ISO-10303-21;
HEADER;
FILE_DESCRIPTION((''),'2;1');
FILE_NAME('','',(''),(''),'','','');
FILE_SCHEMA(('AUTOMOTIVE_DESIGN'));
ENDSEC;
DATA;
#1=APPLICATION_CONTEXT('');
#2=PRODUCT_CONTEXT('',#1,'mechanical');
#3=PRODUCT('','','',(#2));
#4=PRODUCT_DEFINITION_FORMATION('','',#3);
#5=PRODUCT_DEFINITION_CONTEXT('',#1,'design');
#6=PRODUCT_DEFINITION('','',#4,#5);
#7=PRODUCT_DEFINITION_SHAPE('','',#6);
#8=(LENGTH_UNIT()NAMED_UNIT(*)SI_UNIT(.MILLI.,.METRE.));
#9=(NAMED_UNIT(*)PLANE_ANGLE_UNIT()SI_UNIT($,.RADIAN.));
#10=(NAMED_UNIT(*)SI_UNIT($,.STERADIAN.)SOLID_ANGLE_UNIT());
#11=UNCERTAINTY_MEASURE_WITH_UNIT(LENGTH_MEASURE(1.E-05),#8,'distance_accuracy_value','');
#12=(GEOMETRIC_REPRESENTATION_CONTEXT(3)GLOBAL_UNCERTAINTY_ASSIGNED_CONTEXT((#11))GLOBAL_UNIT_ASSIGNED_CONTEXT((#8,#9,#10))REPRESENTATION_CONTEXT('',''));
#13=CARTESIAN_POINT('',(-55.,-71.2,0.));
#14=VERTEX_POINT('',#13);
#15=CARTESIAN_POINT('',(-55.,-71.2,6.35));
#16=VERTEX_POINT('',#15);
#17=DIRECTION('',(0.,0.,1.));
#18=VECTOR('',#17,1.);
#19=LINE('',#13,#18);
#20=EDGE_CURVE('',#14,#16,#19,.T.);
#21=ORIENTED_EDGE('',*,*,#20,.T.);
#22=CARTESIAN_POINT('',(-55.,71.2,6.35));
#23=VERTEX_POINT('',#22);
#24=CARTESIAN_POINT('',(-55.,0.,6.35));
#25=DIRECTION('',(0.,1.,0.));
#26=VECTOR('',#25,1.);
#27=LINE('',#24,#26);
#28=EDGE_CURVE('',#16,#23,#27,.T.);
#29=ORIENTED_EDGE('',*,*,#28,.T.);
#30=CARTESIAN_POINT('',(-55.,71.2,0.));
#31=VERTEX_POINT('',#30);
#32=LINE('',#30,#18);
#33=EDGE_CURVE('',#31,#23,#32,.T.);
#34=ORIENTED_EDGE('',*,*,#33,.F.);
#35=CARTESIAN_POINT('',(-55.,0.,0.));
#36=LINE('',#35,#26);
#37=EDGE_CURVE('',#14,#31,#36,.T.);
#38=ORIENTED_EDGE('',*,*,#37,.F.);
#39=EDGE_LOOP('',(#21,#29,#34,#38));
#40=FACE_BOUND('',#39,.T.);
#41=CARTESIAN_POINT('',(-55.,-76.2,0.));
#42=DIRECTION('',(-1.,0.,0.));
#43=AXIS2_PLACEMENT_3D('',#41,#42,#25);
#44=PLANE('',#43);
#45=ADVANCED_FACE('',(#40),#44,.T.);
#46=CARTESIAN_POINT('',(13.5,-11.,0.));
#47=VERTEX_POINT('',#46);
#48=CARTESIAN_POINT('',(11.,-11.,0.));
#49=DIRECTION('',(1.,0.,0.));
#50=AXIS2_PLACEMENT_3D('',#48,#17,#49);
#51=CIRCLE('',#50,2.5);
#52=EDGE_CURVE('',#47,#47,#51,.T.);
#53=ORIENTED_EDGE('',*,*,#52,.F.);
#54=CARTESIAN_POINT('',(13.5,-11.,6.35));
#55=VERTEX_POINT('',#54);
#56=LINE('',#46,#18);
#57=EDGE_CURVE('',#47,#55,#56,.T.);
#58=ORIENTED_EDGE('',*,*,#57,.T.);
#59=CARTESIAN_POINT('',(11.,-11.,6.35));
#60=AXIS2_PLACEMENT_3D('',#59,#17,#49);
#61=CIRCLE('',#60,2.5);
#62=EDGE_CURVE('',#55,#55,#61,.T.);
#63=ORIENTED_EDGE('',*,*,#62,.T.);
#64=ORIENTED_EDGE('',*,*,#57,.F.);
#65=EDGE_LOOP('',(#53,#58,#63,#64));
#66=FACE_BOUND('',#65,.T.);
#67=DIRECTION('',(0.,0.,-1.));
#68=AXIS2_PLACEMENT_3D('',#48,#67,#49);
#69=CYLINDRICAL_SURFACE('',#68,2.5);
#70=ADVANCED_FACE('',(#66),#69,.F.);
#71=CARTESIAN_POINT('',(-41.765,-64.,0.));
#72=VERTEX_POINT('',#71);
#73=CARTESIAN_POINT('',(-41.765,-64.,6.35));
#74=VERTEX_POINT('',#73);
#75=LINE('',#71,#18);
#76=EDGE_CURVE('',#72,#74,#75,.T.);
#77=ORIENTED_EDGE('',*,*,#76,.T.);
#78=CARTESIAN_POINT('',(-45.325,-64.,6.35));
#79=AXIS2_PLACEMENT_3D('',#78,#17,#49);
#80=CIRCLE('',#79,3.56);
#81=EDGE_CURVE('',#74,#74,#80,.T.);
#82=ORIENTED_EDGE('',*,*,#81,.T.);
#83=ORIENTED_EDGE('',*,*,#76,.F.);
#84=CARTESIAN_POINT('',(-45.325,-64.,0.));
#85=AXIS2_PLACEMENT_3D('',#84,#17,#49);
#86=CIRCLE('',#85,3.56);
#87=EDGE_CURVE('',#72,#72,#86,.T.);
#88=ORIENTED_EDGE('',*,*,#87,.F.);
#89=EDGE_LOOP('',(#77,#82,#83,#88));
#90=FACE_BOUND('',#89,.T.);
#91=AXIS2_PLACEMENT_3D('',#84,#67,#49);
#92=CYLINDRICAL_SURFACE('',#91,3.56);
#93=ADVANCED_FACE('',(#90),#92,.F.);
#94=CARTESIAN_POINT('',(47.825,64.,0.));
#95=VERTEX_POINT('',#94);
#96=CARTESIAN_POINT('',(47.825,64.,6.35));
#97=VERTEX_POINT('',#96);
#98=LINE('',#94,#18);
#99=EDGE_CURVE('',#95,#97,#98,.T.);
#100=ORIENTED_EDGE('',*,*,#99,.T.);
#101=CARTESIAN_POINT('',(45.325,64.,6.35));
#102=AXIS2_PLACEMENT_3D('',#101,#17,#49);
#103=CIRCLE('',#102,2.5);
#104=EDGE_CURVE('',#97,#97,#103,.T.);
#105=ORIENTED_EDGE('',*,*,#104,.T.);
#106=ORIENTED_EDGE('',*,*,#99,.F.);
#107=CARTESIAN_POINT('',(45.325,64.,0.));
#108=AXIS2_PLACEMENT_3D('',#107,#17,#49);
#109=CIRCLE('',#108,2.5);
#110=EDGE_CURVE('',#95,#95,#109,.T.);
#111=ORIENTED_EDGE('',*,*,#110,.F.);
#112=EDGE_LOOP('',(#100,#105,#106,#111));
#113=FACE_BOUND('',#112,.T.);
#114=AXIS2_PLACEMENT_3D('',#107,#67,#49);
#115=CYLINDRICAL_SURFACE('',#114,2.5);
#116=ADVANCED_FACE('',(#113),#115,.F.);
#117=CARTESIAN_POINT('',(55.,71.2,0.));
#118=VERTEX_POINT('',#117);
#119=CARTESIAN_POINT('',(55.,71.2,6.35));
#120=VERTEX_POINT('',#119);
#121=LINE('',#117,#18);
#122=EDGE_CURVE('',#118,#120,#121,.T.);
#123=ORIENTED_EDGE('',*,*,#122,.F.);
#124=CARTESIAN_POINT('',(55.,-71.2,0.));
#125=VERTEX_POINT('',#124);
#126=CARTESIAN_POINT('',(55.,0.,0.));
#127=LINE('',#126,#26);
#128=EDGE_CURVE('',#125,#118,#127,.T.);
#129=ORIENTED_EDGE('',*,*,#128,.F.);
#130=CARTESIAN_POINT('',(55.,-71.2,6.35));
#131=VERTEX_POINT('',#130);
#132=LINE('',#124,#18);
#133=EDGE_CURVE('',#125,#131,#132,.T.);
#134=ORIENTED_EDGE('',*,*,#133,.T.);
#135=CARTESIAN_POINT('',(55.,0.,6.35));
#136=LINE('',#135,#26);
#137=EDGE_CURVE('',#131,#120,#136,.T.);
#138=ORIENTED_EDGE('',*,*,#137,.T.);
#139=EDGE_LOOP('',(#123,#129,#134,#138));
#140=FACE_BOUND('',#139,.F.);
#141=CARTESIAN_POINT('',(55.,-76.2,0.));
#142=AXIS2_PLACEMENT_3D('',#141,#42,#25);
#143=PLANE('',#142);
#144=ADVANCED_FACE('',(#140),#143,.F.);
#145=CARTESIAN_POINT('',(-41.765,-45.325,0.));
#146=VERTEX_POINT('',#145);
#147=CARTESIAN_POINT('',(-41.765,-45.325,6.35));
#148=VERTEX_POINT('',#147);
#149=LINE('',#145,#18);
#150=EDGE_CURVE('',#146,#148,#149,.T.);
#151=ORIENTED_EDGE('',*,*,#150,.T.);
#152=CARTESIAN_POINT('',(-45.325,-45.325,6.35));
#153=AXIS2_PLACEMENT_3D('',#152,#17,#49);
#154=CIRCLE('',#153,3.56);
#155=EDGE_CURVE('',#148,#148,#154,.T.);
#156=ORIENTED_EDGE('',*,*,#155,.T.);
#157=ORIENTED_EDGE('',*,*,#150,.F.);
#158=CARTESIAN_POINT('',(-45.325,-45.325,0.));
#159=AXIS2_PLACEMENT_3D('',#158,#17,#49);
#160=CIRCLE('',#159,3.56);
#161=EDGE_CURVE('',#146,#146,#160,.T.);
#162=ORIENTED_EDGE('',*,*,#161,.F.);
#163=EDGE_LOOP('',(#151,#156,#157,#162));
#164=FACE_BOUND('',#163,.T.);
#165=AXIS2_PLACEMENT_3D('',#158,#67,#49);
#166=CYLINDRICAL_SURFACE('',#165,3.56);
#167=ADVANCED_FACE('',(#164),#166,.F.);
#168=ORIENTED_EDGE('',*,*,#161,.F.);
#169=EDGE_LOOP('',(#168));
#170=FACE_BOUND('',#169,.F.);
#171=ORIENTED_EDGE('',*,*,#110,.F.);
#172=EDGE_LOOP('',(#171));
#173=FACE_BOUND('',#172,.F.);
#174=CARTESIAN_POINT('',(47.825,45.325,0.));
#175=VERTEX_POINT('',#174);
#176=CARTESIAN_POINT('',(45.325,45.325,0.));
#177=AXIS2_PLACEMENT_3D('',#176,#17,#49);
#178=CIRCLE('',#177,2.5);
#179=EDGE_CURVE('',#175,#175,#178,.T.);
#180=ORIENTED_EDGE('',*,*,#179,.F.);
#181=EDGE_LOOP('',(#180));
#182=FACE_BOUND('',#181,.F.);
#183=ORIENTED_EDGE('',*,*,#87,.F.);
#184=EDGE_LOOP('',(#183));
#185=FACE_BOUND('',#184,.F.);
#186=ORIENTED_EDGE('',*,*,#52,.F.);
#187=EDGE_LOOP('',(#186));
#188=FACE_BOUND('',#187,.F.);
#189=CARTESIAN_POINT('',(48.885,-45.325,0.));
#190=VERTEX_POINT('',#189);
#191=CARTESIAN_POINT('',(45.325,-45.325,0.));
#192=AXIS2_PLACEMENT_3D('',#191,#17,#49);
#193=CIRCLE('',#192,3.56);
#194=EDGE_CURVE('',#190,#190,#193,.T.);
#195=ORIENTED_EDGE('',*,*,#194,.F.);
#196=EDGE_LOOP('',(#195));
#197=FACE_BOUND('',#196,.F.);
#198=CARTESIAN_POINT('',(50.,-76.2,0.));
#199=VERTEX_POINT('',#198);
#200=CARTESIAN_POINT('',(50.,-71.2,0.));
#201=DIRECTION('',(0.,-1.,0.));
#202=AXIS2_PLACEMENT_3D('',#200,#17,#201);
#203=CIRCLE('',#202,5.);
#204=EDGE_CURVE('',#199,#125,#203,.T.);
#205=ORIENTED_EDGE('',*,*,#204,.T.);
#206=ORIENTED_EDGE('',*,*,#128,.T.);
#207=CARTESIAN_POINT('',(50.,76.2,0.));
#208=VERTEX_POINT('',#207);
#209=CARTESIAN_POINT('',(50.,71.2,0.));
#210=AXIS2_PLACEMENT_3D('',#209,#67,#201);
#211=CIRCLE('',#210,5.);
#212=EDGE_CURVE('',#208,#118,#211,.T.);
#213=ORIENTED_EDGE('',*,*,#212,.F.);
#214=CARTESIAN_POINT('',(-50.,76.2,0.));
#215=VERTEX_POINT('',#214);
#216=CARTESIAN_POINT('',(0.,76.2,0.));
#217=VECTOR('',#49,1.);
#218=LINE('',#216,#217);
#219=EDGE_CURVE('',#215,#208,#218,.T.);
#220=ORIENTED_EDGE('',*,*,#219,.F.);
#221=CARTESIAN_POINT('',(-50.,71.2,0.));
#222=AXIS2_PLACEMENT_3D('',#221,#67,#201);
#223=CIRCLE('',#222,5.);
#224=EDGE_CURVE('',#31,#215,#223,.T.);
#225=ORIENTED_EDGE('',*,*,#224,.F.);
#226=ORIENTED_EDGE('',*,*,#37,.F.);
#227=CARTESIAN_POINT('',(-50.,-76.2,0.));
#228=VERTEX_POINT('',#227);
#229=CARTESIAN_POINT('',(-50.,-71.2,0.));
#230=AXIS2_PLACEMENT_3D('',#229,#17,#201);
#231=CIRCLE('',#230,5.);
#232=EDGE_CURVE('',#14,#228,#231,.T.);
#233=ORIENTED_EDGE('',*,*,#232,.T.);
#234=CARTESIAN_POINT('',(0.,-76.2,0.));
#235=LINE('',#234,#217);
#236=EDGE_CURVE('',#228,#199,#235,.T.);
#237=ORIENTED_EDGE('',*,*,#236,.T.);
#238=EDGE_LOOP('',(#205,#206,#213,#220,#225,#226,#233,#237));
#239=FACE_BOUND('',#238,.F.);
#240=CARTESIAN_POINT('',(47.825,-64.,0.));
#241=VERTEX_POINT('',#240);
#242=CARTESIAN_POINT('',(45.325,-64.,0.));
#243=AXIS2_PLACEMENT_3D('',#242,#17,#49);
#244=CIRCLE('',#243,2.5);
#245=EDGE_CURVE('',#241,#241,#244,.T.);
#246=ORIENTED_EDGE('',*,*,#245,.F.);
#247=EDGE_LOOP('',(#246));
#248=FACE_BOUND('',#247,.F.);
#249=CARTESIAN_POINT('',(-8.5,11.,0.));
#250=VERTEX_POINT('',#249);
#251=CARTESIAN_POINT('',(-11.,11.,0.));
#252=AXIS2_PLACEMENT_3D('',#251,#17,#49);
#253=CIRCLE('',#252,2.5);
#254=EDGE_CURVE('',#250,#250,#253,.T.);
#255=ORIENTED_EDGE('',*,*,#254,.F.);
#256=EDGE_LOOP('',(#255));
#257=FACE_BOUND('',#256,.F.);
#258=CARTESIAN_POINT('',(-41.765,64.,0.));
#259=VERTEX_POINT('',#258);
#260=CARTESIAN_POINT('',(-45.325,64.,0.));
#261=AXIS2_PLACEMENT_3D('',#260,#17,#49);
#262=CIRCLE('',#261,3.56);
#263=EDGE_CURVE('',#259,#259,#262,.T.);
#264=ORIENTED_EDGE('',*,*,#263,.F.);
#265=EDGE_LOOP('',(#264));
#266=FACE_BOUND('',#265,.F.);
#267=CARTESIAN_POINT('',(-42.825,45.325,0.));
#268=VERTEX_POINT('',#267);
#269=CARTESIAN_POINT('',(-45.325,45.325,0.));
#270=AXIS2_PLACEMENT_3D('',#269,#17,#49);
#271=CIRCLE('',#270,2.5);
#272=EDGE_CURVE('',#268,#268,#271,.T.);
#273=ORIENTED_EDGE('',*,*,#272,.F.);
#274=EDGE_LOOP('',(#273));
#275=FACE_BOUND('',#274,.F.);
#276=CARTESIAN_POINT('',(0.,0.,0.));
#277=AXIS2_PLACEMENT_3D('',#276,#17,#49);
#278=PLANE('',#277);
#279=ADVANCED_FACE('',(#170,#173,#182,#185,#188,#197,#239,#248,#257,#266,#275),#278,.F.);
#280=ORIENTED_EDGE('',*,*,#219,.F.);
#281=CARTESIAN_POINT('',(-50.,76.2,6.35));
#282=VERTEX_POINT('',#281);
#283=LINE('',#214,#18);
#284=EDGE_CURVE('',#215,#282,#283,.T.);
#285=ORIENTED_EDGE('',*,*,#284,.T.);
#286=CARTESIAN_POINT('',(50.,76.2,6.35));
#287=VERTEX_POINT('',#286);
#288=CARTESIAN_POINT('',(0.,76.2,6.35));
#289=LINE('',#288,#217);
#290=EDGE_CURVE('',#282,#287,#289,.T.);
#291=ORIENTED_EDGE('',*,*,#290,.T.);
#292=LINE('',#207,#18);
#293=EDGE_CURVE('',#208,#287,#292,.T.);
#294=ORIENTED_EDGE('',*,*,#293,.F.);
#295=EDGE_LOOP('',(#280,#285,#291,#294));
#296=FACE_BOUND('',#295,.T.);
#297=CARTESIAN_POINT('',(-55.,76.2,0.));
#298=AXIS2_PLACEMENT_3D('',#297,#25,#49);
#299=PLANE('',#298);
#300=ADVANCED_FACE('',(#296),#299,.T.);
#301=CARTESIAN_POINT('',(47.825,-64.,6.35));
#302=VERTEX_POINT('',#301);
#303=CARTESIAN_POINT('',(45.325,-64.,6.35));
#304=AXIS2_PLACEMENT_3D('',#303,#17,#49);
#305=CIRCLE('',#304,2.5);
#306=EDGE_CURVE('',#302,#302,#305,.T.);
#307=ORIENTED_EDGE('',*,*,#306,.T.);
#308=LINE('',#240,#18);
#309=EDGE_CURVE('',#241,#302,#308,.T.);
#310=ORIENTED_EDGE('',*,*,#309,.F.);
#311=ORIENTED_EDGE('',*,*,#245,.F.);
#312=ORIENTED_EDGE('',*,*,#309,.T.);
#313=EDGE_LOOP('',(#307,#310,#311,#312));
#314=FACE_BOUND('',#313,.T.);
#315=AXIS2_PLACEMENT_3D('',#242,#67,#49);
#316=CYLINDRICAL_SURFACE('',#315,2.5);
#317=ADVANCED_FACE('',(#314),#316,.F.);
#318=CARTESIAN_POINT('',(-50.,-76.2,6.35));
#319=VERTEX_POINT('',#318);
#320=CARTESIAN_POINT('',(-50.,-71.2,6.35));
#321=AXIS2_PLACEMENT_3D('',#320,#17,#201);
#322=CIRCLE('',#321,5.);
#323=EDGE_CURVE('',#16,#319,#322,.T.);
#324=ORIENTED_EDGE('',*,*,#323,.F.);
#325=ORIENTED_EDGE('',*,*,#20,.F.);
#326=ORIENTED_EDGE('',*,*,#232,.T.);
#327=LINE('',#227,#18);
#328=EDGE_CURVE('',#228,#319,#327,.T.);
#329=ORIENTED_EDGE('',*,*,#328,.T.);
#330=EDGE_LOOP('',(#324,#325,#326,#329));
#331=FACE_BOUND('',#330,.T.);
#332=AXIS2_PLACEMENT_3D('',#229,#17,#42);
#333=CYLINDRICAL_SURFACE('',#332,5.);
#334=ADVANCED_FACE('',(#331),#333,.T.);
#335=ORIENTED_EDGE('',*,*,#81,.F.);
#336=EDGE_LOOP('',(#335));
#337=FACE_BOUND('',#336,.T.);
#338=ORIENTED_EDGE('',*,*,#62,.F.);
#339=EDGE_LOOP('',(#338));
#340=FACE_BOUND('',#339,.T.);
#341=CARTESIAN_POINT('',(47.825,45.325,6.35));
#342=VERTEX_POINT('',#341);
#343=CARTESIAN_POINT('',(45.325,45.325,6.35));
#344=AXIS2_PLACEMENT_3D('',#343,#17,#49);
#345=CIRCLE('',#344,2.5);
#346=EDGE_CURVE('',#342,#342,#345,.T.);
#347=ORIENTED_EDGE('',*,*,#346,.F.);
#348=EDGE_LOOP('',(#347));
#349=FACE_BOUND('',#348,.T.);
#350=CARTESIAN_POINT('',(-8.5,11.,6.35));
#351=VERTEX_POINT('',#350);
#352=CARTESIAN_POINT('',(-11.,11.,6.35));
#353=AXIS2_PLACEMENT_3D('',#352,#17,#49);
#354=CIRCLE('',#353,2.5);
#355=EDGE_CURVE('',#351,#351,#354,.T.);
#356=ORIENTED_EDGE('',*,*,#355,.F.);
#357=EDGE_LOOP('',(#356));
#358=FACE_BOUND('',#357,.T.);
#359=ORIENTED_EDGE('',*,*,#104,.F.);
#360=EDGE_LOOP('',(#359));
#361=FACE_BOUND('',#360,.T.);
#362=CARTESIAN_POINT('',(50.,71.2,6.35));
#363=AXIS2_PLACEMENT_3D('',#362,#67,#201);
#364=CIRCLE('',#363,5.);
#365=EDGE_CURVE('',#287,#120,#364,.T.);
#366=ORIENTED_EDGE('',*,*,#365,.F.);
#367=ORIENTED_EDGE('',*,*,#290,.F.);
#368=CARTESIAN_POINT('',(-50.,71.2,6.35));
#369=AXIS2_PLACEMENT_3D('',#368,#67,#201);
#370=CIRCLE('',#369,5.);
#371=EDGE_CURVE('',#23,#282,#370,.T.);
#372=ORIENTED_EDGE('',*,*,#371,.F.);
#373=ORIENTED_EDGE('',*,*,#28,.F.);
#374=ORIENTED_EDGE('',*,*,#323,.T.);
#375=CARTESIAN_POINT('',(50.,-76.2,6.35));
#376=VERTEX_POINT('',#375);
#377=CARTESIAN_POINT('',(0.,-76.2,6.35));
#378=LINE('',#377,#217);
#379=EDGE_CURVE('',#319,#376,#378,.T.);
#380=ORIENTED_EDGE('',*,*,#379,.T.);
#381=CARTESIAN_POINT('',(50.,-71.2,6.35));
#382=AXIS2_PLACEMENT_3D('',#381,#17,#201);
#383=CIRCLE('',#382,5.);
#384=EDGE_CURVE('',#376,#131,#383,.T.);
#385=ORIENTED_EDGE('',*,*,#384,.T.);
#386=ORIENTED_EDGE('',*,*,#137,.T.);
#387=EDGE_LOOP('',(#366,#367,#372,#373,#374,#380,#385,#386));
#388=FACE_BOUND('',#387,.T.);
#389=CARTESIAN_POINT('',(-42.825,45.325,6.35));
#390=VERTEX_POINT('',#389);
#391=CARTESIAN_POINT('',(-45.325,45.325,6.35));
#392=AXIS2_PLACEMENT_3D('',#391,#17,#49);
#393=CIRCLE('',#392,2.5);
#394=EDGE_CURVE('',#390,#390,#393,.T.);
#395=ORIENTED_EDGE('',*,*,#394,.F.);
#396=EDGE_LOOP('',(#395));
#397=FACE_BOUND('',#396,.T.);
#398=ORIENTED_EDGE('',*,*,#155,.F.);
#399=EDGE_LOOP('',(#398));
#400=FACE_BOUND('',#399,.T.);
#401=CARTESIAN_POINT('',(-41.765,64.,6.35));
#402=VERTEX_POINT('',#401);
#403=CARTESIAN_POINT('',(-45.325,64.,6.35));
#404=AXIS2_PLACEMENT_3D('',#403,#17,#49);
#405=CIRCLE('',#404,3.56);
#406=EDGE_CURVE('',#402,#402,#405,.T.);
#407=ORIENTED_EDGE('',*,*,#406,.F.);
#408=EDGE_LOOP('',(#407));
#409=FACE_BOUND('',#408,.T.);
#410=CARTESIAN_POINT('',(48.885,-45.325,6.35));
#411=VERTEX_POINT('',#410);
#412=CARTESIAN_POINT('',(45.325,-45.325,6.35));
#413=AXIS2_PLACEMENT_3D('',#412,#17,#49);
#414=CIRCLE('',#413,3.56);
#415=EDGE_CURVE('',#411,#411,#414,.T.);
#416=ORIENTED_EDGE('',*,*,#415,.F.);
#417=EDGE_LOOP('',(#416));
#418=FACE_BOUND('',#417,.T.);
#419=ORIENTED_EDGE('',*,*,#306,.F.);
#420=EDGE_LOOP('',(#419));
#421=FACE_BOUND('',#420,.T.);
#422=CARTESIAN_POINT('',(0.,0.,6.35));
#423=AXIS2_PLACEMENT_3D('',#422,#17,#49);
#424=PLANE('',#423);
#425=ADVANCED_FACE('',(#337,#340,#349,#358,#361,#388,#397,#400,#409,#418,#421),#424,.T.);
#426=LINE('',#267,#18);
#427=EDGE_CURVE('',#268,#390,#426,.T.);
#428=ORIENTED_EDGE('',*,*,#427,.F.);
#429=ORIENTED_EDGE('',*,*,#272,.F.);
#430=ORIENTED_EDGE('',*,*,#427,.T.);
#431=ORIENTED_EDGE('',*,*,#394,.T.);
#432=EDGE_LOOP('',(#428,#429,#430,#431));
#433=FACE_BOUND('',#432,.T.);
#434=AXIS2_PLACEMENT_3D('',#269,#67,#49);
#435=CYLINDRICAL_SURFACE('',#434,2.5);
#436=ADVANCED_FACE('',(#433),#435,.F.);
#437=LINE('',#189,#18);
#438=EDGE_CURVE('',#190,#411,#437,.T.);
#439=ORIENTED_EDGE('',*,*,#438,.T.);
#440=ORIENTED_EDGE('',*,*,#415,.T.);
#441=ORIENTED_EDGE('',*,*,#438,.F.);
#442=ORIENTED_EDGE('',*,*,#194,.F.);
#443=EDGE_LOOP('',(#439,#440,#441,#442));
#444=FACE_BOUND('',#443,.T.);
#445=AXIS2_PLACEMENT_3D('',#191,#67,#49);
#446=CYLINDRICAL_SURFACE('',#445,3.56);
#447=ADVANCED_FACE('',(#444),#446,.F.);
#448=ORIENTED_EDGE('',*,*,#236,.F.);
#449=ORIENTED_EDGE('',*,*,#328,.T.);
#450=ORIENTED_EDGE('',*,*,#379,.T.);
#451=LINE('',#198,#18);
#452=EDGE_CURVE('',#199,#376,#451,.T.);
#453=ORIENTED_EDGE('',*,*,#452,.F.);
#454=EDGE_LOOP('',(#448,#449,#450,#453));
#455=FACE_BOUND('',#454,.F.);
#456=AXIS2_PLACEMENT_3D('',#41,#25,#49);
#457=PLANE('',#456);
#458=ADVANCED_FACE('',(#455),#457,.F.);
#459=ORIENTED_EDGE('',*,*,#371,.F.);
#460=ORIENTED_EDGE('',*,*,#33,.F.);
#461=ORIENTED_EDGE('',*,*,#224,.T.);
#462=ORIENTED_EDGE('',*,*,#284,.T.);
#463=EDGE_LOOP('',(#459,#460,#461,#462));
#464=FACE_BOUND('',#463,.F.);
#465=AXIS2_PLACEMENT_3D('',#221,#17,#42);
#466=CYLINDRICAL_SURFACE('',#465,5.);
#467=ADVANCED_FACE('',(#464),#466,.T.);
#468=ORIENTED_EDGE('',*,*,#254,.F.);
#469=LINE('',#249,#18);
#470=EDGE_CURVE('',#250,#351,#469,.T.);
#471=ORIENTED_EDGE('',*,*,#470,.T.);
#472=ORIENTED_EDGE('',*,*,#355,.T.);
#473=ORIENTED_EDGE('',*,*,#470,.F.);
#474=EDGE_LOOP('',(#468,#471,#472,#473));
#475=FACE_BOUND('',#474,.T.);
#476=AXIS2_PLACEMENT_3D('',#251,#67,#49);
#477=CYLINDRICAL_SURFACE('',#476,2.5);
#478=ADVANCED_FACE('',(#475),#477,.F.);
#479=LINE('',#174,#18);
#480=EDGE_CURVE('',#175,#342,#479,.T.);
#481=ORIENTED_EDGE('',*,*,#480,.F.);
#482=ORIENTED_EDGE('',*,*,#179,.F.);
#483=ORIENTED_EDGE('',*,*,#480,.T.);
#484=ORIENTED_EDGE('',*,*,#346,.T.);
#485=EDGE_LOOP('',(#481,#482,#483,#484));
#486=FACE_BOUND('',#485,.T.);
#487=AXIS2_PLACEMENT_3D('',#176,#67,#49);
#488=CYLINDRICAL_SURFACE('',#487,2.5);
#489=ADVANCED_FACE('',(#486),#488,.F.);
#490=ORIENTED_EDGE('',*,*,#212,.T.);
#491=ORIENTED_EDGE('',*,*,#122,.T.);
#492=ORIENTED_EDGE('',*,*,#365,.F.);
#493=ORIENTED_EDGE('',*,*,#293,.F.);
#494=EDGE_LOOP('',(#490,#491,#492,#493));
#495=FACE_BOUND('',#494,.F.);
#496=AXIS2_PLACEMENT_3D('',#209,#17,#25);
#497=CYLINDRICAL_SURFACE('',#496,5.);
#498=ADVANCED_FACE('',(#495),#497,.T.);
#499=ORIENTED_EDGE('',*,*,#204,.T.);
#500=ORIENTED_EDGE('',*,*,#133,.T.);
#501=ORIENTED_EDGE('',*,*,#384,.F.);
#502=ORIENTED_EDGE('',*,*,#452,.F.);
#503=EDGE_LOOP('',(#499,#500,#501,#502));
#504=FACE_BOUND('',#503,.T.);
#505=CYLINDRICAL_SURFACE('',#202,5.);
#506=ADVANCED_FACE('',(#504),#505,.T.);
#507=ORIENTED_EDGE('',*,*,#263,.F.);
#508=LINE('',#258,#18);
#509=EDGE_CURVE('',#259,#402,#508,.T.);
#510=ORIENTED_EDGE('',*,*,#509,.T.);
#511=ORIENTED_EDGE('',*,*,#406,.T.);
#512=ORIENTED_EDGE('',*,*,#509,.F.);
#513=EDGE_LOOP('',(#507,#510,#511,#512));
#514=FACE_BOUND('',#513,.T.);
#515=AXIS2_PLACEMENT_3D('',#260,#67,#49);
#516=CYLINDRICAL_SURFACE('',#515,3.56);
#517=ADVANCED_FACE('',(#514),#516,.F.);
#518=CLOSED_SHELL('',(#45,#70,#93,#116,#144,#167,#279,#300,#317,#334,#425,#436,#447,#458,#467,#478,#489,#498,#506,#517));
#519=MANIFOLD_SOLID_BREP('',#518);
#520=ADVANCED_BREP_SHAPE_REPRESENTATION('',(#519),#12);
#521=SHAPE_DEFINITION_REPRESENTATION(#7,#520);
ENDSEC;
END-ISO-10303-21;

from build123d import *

# Parameters (mm, degrees)
F0_W     = 110
F0_H     = 152.4
F0_R     = 3.56
F0_R_2   = 2.5
F1_DEPTH = 6.35
F2_R     = 5


# Not quite as in the source:
# - a length typed as a fraction of an inch, garbled in the dataset ("3 / 203.2 mm" for 3/8 in), is restored


with BuildPart() as f1:
    # F0 (on Top) → F1 (new body)
    with BuildSketch(Plane.XY):
        Rectangle(F0_W, F0_H)
        with Locations((-45.325, -64)):
            Circle(F0_R, mode=Mode.SUBTRACT)
        with Locations((-45.325, -45.325)):
            Circle(F0_R, mode=Mode.SUBTRACT)
        with Locations((45.325, -64)):
            Circle(F0_R_2, mode=Mode.SUBTRACT)
        with Locations((45.325, -45.325)):
            Circle(F0_R, mode=Mode.SUBTRACT)
        with Locations((11, -11)):
            Circle(F0_R_2, mode=Mode.SUBTRACT)
        with Locations((-11, 11)):
            Circle(F0_R_2, mode=Mode.SUBTRACT)
        with Locations((-45.325, 45.325)):
            Circle(F0_R_2, mode=Mode.SUBTRACT)
        with Locations((-45.325, 64)):
            Circle(F0_R, mode=Mode.SUBTRACT)
        with Locations((45.325, 45.325)):
            Circle(F0_R_2, mode=Mode.SUBTRACT)
        with Locations((45.325, 64)):
            Circle(F0_R_2, mode=Mode.SUBTRACT)
    extrude(amount=F1_DEPTH)

    # F2
    f2_edges = [f1.edges().sort_by_distance(p)[0] for p in [
        (-55, 76.2, 3.175),
        (55, 76.2, 3.175),
        (55, -76.2, 3.175),
        (-55, -76.2, 3.175),
    ]]
    fillet(f2_edges, radius=F2_R)


solid = f1.part
